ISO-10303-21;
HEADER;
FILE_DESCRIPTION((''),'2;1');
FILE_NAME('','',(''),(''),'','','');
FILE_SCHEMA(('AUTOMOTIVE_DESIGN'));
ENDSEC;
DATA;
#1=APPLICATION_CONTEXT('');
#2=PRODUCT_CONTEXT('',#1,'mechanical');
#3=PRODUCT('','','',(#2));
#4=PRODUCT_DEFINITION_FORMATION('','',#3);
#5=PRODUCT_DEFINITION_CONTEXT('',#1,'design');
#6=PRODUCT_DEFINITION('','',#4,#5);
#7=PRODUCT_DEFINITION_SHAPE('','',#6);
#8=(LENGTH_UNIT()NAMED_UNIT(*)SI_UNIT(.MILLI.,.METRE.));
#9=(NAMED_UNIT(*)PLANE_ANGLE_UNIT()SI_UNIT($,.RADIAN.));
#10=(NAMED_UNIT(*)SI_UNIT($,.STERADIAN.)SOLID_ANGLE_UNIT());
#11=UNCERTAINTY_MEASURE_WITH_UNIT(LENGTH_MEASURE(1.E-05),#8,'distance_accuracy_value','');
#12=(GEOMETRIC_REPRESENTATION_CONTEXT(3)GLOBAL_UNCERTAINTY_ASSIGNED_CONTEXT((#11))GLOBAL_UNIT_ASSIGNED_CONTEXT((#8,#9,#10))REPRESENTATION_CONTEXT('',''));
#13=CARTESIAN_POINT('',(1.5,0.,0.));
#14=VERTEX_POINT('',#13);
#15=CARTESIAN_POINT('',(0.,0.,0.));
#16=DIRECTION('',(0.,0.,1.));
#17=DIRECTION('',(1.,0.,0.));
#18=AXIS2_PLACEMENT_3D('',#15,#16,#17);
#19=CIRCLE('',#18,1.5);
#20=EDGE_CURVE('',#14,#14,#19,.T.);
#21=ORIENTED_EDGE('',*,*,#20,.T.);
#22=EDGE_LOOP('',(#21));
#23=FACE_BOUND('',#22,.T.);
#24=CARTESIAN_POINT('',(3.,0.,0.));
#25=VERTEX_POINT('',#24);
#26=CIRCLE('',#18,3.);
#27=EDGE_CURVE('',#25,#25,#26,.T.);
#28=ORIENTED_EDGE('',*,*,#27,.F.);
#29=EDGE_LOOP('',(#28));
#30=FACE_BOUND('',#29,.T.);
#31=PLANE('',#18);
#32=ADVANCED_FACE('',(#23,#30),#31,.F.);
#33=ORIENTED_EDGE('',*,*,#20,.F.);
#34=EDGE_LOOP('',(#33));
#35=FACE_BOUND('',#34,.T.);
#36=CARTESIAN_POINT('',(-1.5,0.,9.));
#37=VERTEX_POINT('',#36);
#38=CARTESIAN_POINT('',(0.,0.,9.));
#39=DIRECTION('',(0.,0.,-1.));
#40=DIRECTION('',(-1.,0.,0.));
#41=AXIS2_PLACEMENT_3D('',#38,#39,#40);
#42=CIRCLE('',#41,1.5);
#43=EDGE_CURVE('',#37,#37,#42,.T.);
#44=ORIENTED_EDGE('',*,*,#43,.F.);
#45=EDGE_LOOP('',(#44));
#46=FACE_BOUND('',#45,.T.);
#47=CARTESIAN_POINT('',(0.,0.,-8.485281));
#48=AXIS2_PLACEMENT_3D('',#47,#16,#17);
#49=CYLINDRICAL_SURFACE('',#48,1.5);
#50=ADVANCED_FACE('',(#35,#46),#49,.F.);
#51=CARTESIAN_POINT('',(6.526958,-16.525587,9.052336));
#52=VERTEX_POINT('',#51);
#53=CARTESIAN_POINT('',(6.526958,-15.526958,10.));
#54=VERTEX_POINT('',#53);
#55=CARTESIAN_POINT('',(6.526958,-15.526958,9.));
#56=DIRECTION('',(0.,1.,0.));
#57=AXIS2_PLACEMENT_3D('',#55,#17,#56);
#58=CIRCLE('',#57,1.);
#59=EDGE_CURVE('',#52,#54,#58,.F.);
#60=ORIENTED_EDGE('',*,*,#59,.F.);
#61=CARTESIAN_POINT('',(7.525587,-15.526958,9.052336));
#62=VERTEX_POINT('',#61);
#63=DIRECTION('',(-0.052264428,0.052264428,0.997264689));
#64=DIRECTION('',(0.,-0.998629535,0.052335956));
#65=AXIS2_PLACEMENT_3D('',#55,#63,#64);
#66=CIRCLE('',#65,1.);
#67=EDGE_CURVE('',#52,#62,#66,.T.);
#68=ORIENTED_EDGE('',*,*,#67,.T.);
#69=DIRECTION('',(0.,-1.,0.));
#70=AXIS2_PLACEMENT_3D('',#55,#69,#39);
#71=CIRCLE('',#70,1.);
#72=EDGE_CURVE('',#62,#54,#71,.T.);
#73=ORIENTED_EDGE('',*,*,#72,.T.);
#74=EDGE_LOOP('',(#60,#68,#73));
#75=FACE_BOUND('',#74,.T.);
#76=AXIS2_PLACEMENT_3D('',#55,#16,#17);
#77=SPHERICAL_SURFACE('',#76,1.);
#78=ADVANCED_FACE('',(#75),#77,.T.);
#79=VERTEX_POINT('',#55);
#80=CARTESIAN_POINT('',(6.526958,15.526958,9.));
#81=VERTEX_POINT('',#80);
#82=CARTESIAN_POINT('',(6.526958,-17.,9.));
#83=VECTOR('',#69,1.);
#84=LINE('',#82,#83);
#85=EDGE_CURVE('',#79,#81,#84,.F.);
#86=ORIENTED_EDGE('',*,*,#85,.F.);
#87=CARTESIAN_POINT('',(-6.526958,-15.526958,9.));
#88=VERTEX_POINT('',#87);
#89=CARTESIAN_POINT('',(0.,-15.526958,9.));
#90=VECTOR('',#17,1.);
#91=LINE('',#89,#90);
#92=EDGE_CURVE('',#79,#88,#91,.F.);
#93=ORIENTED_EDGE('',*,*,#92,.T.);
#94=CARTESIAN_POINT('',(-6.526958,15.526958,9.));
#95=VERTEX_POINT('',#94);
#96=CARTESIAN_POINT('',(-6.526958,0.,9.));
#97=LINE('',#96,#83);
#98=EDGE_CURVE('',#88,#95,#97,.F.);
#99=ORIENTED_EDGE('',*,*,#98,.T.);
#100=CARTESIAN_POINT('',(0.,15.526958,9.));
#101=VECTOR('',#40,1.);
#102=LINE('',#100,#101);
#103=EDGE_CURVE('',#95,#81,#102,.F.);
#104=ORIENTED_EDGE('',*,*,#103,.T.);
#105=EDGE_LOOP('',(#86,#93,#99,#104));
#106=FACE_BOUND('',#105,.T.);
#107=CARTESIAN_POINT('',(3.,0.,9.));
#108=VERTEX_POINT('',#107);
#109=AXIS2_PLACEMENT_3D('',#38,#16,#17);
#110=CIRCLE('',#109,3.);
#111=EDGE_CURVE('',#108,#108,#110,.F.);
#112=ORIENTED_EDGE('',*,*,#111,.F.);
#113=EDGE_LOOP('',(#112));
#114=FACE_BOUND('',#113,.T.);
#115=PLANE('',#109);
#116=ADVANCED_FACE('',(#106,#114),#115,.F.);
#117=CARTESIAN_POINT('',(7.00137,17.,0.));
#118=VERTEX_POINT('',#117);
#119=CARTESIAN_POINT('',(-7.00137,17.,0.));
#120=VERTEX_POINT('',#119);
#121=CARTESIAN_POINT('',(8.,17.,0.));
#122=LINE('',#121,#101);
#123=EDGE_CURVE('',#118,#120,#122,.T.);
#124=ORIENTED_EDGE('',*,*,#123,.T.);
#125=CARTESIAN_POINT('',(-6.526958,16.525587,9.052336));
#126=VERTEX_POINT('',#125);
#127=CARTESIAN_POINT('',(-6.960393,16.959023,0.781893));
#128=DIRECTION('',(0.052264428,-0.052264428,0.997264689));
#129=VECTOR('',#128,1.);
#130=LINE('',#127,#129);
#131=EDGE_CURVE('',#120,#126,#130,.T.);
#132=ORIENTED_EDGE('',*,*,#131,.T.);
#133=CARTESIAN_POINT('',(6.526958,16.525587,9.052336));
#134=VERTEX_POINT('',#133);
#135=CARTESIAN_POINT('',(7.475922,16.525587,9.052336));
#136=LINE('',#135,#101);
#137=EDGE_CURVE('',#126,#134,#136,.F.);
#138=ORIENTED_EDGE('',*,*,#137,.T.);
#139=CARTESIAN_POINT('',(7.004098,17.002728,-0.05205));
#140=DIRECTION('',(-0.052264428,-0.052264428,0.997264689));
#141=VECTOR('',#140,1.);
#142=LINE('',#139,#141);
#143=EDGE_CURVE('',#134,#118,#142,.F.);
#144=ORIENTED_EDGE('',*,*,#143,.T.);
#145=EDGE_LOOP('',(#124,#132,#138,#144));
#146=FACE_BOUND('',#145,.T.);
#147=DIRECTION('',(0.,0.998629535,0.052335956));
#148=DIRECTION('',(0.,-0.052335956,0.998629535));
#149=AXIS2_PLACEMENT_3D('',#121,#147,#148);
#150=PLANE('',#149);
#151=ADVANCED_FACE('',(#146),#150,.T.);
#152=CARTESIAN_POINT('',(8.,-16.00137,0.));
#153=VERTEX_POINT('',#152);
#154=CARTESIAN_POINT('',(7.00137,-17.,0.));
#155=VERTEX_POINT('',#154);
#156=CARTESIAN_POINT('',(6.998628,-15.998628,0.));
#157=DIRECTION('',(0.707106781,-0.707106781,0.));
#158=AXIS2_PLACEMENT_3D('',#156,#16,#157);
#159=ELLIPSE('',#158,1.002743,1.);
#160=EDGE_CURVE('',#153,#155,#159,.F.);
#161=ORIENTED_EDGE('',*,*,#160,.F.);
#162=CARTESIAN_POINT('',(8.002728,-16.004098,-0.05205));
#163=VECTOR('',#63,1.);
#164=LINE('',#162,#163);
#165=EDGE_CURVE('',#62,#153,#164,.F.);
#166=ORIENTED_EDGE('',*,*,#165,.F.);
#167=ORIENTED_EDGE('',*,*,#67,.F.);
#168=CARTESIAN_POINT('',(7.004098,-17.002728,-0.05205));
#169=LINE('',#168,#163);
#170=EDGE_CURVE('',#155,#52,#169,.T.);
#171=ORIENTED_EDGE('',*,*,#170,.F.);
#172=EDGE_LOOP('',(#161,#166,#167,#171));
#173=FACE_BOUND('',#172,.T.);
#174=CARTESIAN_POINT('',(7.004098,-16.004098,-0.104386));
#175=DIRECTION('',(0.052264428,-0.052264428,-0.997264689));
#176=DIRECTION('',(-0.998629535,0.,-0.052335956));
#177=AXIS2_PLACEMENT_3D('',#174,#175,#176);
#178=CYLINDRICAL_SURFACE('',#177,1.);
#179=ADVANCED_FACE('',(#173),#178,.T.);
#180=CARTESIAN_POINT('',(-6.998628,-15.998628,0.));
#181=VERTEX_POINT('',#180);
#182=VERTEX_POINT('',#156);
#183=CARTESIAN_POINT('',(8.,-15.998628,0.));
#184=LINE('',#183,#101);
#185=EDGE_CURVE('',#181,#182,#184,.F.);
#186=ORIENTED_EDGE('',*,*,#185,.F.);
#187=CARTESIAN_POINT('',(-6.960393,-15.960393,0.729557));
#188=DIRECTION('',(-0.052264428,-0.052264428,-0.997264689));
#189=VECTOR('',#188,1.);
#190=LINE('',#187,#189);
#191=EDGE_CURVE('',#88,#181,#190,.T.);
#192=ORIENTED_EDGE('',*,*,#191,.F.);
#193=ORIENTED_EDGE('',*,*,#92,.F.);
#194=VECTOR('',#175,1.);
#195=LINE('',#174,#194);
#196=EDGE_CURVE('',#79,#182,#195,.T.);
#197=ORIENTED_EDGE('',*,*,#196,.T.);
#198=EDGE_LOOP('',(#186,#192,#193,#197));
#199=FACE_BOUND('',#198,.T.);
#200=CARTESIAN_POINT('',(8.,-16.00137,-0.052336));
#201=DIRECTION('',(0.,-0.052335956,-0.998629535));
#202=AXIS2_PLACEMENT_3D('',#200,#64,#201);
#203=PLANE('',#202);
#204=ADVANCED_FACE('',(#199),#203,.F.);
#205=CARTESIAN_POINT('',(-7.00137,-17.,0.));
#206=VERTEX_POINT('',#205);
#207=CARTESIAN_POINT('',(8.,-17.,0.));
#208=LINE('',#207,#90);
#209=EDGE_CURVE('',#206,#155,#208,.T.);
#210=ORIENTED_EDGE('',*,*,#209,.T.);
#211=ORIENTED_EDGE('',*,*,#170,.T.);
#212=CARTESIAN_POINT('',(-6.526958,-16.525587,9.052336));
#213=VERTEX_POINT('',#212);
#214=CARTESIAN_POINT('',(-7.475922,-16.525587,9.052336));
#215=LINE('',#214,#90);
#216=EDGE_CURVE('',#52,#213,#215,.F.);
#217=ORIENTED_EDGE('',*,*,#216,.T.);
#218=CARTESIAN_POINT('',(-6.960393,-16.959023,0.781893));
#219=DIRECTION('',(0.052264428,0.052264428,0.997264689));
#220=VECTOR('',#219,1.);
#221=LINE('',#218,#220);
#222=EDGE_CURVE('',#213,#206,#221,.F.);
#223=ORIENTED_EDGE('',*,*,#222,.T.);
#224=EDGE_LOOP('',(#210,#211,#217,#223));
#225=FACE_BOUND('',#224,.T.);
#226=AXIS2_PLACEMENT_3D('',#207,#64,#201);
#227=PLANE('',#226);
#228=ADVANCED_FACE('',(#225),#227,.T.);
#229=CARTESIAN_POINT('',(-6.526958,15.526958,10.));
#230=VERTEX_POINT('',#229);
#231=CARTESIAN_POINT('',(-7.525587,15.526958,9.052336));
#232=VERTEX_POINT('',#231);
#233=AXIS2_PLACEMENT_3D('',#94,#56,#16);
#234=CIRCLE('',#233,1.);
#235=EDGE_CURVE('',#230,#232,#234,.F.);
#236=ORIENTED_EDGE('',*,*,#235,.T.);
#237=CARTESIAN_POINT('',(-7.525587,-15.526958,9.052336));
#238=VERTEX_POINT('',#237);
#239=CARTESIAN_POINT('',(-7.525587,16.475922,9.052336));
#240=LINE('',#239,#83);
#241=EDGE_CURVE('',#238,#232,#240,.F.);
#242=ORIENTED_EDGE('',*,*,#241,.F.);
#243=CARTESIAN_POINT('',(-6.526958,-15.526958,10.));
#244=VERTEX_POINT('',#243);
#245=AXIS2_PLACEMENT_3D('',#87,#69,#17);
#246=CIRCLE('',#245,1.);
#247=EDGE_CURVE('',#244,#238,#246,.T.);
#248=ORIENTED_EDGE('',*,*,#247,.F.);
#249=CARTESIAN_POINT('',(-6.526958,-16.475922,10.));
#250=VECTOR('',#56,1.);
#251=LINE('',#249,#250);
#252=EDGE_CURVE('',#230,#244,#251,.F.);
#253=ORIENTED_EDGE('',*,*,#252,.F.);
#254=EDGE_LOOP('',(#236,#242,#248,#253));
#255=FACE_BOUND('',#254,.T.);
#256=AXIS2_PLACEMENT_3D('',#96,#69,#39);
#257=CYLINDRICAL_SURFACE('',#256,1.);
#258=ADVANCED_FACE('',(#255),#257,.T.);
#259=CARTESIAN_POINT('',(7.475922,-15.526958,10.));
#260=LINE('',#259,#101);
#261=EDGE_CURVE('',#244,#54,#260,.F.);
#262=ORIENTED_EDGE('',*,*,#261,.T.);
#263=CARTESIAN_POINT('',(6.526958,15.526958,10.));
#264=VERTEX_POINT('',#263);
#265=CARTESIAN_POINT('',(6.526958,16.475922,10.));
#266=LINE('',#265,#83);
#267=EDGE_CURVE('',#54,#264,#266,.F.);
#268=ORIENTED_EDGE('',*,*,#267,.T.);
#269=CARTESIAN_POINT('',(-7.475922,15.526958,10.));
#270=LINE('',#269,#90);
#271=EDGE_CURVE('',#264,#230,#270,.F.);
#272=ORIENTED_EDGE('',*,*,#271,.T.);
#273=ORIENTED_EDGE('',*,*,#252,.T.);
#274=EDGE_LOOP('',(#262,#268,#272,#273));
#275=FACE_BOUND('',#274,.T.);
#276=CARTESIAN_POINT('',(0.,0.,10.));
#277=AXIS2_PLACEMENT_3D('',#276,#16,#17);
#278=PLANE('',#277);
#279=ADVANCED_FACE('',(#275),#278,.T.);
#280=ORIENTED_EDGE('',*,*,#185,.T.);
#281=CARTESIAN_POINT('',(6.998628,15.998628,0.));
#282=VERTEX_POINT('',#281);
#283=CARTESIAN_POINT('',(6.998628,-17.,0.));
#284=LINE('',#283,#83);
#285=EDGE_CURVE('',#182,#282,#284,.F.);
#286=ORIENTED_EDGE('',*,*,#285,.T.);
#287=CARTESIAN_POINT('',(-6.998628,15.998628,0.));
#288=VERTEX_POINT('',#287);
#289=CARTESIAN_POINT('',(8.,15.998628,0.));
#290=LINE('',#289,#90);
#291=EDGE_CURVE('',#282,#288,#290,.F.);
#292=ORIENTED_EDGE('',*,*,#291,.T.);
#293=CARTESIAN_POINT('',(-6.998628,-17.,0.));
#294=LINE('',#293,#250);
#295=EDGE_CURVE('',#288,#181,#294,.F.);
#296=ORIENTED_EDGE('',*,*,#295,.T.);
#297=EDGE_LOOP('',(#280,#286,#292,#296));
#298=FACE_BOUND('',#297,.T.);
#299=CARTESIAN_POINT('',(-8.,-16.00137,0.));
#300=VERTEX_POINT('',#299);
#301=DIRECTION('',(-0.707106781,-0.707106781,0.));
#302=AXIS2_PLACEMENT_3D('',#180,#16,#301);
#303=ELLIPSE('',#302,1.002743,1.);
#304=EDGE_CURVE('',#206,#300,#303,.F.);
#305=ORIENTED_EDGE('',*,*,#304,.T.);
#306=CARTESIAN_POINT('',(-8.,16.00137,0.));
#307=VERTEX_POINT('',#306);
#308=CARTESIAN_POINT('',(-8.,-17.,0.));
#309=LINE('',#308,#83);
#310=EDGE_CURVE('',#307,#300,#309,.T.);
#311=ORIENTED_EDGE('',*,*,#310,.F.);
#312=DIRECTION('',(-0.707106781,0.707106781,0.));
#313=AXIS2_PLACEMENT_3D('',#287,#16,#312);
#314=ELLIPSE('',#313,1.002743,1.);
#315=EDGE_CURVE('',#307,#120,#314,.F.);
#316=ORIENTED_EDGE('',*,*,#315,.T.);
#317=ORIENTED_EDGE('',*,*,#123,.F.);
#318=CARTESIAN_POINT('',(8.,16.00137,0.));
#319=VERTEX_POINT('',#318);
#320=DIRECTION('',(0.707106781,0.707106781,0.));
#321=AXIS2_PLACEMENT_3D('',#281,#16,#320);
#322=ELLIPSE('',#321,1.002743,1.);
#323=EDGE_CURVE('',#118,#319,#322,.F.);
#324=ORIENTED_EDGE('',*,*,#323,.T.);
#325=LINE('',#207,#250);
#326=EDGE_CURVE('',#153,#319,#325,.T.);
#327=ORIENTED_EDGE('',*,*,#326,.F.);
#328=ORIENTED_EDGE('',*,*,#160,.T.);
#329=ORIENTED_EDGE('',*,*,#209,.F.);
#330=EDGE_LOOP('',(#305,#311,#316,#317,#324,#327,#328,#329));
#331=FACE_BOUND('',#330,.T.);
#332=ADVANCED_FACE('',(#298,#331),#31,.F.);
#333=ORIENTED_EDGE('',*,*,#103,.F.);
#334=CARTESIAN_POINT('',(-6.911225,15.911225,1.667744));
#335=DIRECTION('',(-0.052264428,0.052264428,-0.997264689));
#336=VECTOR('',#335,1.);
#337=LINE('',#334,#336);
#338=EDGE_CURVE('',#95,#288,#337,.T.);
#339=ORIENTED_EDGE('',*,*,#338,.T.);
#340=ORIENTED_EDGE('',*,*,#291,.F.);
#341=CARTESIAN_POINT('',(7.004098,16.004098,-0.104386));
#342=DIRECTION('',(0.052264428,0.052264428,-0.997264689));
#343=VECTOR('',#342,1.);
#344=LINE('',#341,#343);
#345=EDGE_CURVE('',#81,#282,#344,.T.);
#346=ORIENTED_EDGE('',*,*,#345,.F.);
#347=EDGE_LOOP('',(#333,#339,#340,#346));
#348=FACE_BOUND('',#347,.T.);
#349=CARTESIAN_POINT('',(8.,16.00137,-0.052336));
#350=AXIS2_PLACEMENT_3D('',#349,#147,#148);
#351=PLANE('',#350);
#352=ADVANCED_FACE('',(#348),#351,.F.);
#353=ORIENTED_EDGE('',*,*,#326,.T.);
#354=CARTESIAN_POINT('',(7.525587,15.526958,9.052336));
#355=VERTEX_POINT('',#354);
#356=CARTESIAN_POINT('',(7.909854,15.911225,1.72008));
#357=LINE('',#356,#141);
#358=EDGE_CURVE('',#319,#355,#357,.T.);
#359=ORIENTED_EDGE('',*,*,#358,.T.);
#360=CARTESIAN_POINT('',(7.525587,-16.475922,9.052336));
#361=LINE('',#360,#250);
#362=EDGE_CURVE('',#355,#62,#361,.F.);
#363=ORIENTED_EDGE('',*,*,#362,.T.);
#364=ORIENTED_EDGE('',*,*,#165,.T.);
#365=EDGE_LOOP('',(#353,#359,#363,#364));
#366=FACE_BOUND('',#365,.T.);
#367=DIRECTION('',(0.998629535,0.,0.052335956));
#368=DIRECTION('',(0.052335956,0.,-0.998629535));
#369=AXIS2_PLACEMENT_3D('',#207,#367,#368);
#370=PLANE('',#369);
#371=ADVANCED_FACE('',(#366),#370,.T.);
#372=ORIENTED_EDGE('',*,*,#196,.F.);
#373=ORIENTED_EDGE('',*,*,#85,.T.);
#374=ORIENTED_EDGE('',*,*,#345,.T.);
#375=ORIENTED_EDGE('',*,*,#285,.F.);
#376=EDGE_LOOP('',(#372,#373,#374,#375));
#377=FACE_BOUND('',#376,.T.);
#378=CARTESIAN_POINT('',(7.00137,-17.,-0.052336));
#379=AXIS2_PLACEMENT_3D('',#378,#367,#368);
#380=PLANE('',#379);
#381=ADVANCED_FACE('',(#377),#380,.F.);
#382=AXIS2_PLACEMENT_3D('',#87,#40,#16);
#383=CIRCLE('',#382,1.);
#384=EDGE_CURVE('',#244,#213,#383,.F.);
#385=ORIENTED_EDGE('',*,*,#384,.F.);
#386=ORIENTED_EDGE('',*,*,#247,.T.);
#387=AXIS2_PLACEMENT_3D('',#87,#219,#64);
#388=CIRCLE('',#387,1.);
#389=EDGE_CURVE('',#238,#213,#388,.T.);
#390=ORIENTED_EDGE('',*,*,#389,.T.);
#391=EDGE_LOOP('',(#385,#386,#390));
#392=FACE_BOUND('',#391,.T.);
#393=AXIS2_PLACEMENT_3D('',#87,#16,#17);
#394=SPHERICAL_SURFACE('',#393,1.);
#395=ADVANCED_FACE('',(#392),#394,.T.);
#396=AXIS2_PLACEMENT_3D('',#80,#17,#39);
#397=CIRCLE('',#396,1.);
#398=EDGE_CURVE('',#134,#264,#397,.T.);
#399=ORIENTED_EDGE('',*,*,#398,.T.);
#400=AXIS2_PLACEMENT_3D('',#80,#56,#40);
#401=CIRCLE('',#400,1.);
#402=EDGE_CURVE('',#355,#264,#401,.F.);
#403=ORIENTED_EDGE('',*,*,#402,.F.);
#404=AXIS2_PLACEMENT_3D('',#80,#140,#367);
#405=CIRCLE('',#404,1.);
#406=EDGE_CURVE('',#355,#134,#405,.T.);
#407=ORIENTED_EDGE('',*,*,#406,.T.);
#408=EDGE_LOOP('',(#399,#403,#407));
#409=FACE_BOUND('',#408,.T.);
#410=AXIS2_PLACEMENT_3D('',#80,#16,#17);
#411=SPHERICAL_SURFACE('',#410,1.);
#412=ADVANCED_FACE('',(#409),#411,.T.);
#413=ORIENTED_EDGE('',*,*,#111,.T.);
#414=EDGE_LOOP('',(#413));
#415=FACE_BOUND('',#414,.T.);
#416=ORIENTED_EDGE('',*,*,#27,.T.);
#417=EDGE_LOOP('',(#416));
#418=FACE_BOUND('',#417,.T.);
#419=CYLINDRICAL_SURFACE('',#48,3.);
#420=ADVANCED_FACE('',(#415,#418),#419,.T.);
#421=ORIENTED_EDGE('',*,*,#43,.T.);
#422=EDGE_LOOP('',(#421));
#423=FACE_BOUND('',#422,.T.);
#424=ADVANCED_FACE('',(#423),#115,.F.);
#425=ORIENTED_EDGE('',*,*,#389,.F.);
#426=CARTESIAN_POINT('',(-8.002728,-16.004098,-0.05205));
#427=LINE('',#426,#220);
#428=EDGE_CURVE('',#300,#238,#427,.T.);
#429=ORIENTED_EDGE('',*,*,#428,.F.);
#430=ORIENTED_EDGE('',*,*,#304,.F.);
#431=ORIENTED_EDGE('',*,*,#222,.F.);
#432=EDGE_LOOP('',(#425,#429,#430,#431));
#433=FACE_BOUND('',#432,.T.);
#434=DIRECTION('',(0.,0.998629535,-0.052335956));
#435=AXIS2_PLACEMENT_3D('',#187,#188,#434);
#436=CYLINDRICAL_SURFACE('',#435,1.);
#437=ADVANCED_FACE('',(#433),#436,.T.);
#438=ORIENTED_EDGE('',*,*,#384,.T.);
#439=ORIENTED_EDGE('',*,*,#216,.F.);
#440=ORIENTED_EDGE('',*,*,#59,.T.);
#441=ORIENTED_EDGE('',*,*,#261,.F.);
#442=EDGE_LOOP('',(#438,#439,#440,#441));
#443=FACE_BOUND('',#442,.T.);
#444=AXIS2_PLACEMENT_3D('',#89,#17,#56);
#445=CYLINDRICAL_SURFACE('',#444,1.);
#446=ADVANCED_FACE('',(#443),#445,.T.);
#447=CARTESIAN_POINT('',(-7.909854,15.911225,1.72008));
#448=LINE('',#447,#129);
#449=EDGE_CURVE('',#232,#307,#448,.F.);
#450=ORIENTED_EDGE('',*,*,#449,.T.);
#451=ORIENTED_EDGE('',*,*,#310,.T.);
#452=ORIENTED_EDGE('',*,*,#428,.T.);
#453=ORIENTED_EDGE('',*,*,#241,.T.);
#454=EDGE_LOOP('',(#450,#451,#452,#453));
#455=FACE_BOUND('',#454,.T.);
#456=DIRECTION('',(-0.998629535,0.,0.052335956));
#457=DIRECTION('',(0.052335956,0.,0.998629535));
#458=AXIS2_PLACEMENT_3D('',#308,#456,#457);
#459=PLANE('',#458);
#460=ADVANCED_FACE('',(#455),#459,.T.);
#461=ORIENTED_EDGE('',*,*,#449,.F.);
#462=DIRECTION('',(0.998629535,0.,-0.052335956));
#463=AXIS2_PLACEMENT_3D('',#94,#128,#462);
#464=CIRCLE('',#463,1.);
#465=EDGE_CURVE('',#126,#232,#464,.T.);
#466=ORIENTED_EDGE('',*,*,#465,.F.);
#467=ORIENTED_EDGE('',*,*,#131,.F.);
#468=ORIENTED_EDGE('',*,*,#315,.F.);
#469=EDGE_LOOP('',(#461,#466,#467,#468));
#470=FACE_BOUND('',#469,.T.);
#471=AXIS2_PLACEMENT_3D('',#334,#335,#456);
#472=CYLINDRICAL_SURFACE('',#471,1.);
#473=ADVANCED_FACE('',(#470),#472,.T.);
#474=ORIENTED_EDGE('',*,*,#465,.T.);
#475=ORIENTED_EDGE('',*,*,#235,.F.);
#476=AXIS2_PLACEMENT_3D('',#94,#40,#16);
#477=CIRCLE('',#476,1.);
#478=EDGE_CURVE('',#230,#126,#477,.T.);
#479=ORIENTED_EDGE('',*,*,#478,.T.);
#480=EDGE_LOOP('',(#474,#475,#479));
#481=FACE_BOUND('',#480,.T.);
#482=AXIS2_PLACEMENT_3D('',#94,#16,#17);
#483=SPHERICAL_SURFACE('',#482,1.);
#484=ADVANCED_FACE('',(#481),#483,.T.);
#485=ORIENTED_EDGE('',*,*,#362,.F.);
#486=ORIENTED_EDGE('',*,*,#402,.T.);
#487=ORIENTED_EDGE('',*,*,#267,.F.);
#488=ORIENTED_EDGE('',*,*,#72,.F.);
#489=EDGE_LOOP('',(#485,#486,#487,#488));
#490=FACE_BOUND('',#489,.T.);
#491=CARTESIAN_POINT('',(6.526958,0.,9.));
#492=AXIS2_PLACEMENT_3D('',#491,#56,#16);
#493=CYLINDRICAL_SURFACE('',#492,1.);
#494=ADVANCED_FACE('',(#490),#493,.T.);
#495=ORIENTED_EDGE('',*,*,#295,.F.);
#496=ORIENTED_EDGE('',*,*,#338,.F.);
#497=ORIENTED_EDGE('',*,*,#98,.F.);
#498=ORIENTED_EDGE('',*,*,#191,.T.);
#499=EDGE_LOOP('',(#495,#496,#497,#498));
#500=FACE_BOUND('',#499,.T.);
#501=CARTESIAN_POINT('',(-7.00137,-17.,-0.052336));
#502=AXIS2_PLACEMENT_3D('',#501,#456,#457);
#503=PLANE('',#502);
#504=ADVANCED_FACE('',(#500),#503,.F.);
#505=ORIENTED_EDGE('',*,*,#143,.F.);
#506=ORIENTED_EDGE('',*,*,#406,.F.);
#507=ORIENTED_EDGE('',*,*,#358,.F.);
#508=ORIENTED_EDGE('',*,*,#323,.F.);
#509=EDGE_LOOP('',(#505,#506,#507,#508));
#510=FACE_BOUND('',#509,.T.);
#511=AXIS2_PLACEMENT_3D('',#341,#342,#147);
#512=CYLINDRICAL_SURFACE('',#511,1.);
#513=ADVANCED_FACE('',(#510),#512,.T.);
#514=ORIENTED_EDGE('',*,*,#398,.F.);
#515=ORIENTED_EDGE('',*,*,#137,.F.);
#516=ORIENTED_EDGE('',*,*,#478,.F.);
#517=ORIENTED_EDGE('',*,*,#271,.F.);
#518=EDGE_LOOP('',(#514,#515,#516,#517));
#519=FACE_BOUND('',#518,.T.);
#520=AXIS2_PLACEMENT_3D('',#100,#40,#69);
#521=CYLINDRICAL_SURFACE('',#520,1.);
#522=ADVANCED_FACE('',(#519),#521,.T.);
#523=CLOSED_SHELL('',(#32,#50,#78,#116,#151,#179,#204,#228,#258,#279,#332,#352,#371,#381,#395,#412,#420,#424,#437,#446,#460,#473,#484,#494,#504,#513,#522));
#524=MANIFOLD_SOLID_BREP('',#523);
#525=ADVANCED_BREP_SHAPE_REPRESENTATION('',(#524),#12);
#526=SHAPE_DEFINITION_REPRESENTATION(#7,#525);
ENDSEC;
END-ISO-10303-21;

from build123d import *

# Parameters (mm, degrees)
ESQUISSE1_W        = 16
ESQUISSE1_H        = 34
BOSS_EXTRU_1_DEPTH = 10
BOSS_EXTRU_1_TAPER = 3
CONG_1_R           = 1
COQUE1_OUTLINE_W   = 13.05391528
COQUE1_OUTLINE_H   = 31.05391528
COQUE1_DEPTH       = 9
COQUE1_DRAFT       = 3
ESQUISSE2_R        = 3
ESQUISSE2_R_2      = 1.5
BOSS_EXTRU_2_DEPTH = 9


# Read off the part's stored shape, not the designer's step: Coque1
with BuildPart() as part:
    # Esquisse1 → Boss.-Extru.1 (new body)
    with BuildSketch(Plane.XY):
        Rectangle(ESQUISSE1_W, ESQUISSE1_H)
    extrude(amount=BOSS_EXTRU_1_DEPTH, taper=BOSS_EXTRU_1_TAPER)

    # Congé1
    cong_1_edges = [part.edges().sort_by_distance(p)[0] for p in [
        (7.475922207, 0, 10),
        (0, 16.475922207, 10),
        (-7.475922207, 0, 10),
        (-7.737960642, 16.737960642, 5.000008814),
        (7.737961104, 16.737961104, 5),
        (7.737960642, -16.737960642, 5.000008814),
        (-7.737961104, -16.737961104, 5),
        (0, -16.475922207, 10),
    ]]
    fillet(cong_1_edges, radius=CONG_1_R)


with BuildPart() as coque1_tool:
    # Coque1 outline → Coque1 (with draft: the straight prism first)
    with BuildSketch(Plane.XY.offset(9)):
        Rectangle(COQUE1_OUTLINE_W, COQUE1_OUTLINE_H)
    extrude(amount=-COQUE1_DEPTH)
    # Coque1: the draft: its side faces are tilted about the plane it starts from
    coque1_sides = [coque1_tool.faces().sort_by_distance(p)[0] for p in [
        (-6.52695764, 0, 4.5),
        (0, -15.52695764, 4.5),
        (6.52695764, 0, 4.5),
        (0, 15.52695764, 4.5),
    ]]
    draft(coque1_sides, Plane.XY.offset(9), COQUE1_DRAFT)


with BuildPart() as part_1:
    add(part.part)

    # Coque1: cut by coque1_tool
    add(coque1_tool.part, mode=Mode.SUBTRACT)

    # Esquisse2 → Boss.-Extru.2 (add)
    with BuildSketch(Plane(origin=(0, 0, 9), x_dir=(-1, 0, 0), z_dir=(0, 0, -1))):
        with Locations(Location((0, 0, 0), (0, 0, 180))):
            Circle(ESQUISSE2_R)
        with Locations(Location((0, 0, 0), (0, 0, 180))):
            Circle(ESQUISSE2_R_2, mode=Mode.SUBTRACT)
    extrude(amount=BOSS_EXTRU_2_DEPTH)


solid = part_1.part
